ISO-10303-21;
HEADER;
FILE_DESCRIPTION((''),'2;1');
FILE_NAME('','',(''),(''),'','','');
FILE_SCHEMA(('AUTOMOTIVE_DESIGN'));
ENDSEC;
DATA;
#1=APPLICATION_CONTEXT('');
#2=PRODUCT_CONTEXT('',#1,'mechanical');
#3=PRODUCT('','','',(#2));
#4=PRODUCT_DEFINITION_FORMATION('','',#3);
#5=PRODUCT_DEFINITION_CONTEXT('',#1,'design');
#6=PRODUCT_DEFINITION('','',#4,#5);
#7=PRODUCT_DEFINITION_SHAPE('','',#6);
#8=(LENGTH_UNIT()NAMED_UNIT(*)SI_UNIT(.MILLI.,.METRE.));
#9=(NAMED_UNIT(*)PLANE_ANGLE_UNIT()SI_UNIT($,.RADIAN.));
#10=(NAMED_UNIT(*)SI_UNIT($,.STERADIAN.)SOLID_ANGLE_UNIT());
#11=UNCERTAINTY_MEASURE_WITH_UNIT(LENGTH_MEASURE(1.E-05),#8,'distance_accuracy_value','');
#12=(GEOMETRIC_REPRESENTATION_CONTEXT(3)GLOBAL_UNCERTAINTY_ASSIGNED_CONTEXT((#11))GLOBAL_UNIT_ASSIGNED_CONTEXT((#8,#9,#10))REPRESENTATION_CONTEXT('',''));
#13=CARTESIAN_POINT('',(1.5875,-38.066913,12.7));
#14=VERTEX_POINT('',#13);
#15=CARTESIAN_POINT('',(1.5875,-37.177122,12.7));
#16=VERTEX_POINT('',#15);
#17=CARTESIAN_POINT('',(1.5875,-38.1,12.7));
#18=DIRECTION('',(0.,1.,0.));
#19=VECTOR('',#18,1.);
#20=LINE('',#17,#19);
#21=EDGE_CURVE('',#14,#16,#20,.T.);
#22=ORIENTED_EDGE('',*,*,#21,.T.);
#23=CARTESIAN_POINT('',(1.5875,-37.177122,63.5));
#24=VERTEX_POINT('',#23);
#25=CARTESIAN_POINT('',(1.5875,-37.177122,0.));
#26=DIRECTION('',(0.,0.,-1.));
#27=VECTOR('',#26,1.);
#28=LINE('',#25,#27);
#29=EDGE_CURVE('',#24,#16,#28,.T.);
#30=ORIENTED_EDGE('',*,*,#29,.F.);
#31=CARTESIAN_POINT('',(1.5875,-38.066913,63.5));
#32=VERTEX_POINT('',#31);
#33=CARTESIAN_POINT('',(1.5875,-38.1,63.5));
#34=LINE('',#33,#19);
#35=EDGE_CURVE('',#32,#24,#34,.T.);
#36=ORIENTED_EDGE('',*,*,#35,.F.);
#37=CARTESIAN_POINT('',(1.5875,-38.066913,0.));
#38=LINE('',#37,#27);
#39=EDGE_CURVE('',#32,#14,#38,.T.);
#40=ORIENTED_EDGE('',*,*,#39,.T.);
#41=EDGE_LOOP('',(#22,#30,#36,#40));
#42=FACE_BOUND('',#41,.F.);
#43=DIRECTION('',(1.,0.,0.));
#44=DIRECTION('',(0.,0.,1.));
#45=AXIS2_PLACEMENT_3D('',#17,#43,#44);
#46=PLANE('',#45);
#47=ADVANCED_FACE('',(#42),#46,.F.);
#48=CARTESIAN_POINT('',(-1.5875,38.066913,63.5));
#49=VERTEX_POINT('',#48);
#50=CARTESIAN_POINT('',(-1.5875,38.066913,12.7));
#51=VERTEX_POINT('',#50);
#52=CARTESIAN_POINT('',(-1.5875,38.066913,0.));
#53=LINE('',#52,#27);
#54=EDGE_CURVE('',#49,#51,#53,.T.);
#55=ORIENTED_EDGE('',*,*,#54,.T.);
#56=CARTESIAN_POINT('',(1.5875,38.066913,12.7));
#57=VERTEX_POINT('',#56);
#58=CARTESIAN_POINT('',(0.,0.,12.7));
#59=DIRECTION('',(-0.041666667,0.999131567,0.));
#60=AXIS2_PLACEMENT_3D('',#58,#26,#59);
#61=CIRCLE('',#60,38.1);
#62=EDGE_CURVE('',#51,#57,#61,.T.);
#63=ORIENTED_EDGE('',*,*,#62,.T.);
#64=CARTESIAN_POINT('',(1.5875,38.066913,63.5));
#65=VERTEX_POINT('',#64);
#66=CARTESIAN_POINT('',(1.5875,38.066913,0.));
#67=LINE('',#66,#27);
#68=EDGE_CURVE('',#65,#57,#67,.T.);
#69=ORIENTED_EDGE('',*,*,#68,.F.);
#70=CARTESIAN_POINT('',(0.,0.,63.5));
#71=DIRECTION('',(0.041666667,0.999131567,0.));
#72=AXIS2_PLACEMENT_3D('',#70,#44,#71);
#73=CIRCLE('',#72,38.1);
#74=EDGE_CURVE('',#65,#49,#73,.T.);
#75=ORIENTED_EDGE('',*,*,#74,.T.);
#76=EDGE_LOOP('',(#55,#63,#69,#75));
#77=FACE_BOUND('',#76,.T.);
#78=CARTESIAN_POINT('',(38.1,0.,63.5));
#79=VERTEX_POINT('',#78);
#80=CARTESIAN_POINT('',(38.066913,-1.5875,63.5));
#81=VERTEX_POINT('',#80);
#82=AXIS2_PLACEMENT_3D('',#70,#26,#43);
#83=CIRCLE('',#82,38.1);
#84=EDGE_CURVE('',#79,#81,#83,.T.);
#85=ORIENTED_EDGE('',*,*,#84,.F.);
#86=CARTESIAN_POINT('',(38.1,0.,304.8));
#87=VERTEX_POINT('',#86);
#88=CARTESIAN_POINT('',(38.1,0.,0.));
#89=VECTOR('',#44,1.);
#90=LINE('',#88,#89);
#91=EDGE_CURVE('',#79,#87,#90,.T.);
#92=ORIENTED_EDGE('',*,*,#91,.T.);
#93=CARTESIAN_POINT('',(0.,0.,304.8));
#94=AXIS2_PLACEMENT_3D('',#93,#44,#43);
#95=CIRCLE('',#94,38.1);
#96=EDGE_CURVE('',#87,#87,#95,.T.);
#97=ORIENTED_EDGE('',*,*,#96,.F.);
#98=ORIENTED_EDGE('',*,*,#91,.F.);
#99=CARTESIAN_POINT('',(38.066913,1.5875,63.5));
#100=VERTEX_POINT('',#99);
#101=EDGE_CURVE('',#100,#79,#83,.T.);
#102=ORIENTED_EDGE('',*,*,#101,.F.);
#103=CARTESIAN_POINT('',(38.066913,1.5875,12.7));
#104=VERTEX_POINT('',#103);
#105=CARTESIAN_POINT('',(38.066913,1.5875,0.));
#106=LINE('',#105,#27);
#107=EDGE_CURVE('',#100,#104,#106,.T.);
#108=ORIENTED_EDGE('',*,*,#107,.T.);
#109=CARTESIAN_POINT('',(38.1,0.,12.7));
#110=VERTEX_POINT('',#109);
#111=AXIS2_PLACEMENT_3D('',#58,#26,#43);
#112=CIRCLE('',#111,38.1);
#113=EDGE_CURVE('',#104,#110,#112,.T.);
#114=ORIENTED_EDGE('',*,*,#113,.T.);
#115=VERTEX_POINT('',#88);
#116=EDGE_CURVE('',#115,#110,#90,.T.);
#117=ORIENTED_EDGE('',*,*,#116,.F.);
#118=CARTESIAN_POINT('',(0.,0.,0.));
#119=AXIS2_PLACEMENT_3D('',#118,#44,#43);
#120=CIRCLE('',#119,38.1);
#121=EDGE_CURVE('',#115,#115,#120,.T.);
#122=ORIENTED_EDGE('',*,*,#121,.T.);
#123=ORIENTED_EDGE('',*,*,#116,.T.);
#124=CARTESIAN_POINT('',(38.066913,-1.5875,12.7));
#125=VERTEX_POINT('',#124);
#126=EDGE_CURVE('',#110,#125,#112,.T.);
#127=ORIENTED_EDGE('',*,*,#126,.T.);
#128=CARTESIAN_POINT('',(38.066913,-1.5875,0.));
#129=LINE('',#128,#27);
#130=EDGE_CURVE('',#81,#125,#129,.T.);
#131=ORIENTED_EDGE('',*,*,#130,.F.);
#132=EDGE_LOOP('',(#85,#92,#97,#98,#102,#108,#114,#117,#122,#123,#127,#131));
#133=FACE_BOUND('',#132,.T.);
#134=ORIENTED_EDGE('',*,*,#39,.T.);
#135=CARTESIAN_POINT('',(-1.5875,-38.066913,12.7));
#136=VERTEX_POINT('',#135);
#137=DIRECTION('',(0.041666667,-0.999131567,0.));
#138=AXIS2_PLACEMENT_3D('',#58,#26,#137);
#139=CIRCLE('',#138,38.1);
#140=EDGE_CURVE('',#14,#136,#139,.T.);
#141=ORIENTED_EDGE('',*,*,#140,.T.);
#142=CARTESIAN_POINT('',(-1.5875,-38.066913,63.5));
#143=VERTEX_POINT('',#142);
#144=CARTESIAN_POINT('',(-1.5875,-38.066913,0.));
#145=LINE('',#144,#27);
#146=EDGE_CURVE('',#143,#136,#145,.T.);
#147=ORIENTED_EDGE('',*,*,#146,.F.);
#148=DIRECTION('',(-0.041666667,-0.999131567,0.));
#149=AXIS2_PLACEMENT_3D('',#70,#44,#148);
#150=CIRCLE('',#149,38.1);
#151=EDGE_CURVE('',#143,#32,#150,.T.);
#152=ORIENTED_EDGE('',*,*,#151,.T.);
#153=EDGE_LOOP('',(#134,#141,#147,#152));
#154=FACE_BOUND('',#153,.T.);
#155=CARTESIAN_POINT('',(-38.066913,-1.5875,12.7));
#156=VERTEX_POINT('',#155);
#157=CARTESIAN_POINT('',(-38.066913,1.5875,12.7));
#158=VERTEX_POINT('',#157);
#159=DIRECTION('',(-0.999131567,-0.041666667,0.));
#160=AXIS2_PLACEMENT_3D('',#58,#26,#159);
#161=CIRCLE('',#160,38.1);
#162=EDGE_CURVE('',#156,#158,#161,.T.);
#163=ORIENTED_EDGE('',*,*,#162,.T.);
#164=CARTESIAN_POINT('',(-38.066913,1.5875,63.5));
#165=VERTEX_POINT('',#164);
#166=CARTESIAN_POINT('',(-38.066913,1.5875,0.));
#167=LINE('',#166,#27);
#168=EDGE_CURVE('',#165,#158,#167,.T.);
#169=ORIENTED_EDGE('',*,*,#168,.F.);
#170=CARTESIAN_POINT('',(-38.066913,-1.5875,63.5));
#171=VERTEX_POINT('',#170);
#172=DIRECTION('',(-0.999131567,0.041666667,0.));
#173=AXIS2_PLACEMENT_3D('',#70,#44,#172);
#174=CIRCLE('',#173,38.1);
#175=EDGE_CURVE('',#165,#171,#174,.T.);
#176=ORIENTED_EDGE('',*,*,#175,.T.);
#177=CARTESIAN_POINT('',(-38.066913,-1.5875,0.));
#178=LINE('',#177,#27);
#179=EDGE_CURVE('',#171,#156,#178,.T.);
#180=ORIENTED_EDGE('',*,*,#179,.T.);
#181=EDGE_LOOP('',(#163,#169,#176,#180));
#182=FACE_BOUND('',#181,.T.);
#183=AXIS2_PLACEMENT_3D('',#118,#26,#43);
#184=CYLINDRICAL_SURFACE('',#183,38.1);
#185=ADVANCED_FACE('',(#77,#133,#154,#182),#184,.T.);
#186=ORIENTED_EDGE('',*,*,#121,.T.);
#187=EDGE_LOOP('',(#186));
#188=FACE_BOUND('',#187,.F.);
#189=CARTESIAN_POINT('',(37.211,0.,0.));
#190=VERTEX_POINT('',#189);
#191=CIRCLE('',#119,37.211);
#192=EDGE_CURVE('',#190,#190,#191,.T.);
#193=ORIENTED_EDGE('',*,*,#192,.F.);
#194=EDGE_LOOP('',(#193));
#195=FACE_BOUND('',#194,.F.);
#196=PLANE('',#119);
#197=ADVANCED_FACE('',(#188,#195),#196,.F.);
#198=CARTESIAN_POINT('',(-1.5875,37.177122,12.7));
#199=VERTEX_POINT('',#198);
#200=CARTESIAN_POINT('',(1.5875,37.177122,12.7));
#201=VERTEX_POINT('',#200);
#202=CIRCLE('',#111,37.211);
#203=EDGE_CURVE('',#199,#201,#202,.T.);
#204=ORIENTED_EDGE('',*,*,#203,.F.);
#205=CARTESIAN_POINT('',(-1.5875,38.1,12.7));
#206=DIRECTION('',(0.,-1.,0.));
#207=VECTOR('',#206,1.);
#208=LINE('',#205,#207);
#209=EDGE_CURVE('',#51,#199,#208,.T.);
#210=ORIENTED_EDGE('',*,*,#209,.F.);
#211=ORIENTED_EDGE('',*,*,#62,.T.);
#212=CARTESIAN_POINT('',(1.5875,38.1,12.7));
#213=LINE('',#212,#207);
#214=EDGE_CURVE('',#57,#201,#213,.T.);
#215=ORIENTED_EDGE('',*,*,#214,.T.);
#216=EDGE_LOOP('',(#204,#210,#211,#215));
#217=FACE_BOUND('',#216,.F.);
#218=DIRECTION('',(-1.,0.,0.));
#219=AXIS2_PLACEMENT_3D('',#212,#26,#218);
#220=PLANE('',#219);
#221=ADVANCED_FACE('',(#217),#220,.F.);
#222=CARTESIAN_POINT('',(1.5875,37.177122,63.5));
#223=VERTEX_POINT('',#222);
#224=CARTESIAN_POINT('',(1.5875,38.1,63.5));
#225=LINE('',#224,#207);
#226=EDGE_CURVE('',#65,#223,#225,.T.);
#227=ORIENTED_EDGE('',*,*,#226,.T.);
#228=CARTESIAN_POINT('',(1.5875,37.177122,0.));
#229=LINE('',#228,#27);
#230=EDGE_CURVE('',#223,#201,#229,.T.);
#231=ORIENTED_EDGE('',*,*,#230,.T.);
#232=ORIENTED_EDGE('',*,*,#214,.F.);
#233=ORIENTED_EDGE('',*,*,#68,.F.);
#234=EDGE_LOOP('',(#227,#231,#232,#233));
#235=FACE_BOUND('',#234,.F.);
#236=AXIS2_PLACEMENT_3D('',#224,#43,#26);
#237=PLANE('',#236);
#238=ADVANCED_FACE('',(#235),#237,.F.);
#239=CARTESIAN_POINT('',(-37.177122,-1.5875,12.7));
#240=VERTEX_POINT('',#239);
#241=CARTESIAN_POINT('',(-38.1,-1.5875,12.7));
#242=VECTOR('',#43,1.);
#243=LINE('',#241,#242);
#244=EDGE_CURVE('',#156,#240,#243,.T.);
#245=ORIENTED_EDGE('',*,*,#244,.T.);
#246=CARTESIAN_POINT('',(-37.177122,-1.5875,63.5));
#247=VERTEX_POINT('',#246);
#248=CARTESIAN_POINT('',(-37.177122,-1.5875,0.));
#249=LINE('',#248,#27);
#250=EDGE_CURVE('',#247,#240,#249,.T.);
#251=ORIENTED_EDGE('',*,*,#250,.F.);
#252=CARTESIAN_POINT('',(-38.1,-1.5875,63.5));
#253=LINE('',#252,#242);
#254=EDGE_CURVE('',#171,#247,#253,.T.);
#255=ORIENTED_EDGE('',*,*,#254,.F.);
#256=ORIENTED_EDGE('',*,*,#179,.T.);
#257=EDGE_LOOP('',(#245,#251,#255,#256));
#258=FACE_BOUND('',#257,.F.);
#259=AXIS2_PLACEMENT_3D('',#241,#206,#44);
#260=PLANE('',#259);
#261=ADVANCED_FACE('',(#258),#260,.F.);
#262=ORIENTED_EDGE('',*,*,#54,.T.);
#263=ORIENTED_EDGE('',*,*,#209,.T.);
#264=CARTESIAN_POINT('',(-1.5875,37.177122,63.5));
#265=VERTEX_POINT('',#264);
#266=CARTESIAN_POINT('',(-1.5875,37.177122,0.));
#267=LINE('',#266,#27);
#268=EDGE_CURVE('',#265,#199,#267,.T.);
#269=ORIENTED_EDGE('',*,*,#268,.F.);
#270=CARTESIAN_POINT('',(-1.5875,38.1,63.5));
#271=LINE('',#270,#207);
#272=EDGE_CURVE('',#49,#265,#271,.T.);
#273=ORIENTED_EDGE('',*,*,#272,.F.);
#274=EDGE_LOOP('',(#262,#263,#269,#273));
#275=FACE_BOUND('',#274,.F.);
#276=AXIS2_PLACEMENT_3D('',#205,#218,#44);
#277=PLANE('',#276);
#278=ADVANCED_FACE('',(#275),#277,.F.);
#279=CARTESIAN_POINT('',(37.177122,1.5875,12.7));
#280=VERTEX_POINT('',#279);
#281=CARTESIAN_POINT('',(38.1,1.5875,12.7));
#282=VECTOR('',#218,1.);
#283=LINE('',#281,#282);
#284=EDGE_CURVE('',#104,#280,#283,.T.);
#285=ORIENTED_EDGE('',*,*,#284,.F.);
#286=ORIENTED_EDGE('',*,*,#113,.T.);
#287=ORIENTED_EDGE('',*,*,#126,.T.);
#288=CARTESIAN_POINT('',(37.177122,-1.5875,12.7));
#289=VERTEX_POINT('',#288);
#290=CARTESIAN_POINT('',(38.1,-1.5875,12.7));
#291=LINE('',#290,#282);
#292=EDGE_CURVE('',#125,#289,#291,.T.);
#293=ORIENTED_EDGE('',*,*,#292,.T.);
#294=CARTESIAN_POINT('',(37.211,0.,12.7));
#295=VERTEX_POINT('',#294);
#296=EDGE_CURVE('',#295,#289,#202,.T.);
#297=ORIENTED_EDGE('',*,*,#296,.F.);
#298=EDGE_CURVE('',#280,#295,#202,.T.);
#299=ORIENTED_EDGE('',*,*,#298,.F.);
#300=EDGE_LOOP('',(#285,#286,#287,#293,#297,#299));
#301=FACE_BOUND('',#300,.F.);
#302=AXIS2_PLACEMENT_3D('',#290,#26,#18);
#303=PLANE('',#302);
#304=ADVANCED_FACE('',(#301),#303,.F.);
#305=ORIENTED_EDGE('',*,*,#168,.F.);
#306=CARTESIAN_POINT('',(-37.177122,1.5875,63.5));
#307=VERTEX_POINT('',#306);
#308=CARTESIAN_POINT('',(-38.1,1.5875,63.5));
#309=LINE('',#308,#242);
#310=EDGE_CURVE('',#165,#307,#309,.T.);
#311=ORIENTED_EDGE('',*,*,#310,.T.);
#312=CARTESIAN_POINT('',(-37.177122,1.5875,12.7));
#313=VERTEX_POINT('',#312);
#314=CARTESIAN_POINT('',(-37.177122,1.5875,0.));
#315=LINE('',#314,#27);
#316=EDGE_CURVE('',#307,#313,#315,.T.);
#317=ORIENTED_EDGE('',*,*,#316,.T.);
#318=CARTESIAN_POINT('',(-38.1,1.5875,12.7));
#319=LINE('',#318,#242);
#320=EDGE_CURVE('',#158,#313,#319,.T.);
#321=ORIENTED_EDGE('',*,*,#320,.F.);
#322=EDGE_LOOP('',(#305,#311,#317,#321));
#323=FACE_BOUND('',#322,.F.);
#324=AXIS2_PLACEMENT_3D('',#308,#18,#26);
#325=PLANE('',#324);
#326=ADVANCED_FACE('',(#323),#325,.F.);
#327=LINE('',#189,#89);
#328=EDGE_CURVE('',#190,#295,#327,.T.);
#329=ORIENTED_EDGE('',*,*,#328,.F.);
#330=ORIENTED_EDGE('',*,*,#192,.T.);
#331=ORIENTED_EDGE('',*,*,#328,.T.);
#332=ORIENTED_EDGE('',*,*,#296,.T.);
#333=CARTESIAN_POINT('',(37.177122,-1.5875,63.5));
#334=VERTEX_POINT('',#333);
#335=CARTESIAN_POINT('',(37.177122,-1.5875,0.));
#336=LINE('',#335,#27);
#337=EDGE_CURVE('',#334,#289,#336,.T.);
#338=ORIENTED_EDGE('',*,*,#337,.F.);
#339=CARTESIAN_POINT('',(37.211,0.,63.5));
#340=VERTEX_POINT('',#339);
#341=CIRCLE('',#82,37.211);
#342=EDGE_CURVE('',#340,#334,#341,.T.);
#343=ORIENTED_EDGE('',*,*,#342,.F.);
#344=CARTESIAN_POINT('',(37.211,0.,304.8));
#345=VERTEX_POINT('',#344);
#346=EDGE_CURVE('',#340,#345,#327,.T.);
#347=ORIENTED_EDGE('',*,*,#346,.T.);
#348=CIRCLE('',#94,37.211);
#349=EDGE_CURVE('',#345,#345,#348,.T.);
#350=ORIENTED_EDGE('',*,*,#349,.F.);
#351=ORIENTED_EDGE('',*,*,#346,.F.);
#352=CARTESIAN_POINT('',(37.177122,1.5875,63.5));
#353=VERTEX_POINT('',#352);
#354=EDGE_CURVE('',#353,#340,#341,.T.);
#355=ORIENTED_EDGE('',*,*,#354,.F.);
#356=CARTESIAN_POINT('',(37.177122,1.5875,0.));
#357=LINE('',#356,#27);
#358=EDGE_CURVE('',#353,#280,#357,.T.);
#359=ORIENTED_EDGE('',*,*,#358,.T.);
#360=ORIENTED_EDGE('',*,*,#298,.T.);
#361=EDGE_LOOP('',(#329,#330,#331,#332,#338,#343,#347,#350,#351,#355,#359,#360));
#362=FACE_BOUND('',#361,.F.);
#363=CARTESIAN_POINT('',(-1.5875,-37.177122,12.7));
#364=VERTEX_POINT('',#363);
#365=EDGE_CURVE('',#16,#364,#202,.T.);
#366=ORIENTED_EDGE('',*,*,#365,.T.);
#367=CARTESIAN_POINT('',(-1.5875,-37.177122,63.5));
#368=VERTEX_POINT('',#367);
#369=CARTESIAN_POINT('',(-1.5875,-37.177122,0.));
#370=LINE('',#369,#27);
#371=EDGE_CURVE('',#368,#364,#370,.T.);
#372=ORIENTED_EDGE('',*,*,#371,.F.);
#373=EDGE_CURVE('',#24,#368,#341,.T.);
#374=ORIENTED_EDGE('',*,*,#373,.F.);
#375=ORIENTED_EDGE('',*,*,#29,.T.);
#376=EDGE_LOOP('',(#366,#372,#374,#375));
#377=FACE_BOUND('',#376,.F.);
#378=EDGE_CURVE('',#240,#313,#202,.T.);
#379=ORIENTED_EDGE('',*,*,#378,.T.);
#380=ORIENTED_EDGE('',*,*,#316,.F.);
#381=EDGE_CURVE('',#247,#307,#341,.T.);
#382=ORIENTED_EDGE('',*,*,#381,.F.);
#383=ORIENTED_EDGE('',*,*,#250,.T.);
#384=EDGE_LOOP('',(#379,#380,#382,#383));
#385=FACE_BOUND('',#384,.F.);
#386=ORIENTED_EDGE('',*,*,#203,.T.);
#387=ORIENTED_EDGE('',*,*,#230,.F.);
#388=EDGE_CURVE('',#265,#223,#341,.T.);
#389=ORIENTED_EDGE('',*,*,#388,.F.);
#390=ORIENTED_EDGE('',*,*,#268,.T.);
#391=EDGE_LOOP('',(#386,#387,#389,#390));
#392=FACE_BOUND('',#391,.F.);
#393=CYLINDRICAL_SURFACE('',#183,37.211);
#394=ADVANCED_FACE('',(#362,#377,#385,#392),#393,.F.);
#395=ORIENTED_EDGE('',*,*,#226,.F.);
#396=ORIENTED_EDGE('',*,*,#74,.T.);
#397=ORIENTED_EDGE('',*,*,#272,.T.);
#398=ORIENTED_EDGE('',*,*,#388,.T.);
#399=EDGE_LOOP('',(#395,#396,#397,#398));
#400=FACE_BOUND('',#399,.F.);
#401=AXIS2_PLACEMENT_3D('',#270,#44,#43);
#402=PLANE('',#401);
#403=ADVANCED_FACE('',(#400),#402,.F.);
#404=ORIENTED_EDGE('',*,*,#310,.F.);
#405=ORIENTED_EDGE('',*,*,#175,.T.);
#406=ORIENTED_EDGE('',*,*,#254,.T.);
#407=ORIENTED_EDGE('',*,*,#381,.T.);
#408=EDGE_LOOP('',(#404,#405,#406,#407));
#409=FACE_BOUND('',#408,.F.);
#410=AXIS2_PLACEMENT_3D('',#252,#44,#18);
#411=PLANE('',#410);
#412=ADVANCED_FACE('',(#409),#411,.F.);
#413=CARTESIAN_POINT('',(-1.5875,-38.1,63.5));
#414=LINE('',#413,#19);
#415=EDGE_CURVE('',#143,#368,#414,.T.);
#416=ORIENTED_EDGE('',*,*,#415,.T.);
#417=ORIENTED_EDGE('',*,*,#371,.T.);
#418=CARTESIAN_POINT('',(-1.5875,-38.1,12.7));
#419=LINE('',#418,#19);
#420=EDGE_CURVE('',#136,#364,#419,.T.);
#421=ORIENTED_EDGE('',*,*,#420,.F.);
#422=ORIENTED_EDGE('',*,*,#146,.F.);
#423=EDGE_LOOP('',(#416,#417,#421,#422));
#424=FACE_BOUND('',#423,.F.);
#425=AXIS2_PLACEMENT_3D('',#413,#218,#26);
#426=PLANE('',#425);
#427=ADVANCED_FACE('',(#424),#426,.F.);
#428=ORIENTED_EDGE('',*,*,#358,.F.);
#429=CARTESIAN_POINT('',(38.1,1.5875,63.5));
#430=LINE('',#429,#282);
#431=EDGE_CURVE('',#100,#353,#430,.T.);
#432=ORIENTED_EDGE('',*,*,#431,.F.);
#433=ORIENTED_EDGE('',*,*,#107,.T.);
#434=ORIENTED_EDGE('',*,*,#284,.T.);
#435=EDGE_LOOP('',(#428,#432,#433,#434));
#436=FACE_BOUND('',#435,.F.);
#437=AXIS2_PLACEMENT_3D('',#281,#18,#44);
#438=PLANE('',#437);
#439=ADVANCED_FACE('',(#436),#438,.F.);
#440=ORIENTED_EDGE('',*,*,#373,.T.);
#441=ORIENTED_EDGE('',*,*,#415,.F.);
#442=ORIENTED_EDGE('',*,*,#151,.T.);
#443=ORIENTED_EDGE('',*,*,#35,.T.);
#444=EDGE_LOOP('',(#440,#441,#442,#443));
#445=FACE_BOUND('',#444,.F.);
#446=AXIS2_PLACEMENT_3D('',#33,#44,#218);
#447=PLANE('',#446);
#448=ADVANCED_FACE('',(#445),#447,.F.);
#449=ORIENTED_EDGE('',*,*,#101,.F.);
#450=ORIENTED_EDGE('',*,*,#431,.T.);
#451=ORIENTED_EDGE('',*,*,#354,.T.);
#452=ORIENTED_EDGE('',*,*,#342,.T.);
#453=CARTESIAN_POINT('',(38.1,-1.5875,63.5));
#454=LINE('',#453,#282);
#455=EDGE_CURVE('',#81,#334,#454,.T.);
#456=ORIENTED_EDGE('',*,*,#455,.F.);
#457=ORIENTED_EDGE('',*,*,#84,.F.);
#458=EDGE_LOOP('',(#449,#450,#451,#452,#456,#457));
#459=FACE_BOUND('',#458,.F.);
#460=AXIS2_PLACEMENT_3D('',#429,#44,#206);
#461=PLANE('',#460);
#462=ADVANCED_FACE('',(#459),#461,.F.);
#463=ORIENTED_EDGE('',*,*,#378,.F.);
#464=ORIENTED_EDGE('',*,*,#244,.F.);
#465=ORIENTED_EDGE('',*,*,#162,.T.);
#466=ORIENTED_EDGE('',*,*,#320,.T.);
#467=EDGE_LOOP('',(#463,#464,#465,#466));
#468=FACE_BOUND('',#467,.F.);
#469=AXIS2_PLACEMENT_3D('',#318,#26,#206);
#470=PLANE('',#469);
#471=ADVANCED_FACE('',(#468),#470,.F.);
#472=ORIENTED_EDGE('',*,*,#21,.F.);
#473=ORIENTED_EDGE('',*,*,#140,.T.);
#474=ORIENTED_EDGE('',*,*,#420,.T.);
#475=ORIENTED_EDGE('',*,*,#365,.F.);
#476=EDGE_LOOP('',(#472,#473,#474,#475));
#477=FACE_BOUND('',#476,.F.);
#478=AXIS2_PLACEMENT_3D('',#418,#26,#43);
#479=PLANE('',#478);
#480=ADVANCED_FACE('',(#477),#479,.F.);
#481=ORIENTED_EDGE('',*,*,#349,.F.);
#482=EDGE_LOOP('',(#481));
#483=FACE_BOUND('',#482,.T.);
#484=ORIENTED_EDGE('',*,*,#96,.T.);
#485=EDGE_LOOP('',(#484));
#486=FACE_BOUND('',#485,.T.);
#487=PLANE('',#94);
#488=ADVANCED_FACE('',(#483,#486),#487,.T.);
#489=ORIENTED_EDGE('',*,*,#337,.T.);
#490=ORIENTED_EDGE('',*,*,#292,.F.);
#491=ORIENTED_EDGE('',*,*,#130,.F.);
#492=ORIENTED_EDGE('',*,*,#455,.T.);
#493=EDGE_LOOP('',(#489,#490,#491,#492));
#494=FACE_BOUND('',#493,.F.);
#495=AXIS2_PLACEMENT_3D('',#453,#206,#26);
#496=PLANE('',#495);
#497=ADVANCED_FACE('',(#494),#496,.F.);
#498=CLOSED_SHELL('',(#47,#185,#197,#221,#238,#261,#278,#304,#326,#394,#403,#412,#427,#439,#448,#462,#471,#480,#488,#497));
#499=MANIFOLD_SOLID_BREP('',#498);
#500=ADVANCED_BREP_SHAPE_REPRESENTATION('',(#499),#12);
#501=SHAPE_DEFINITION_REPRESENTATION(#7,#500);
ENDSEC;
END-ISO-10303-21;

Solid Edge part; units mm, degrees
sketch "Sketch1" plane through (0, 0, 0) normal (0, 0, 1) x (1, 0, 0)
  circle A0 centre (0, 0) radius 38.1
  circle A1 centre (0, 0) radius 37.211
  dimension "D1" = 76.2
  dimension "D2" = 74.422
extrude "Protrusion1" add sketch "Sketch1" along normal blind 304.8
sketch "Sketch2" plane through (-38.1, 0, 152.4) normal (-1, 0, 0) x (0, 0, -1)
  line L0 (88.9, 1.5875) -> (88.9, -1.5875)
  line L1 (88.9, -1.5875) -> (139.7, -1.5875)
  line L2 (139.7, -1.5875) -> (139.7, 1.5875)
  line L3 (139.7, 1.5875) -> (88.9, 1.5875)
extrude "ExtrudedCutout_1" cut sketch "Sketch2" against normal blind 12.7
pattern_circular "Pattern1" count 4 over 360 about axis through (0, 0, 0) along (0, 0, -1) of "ExtrudedCutout_1"
